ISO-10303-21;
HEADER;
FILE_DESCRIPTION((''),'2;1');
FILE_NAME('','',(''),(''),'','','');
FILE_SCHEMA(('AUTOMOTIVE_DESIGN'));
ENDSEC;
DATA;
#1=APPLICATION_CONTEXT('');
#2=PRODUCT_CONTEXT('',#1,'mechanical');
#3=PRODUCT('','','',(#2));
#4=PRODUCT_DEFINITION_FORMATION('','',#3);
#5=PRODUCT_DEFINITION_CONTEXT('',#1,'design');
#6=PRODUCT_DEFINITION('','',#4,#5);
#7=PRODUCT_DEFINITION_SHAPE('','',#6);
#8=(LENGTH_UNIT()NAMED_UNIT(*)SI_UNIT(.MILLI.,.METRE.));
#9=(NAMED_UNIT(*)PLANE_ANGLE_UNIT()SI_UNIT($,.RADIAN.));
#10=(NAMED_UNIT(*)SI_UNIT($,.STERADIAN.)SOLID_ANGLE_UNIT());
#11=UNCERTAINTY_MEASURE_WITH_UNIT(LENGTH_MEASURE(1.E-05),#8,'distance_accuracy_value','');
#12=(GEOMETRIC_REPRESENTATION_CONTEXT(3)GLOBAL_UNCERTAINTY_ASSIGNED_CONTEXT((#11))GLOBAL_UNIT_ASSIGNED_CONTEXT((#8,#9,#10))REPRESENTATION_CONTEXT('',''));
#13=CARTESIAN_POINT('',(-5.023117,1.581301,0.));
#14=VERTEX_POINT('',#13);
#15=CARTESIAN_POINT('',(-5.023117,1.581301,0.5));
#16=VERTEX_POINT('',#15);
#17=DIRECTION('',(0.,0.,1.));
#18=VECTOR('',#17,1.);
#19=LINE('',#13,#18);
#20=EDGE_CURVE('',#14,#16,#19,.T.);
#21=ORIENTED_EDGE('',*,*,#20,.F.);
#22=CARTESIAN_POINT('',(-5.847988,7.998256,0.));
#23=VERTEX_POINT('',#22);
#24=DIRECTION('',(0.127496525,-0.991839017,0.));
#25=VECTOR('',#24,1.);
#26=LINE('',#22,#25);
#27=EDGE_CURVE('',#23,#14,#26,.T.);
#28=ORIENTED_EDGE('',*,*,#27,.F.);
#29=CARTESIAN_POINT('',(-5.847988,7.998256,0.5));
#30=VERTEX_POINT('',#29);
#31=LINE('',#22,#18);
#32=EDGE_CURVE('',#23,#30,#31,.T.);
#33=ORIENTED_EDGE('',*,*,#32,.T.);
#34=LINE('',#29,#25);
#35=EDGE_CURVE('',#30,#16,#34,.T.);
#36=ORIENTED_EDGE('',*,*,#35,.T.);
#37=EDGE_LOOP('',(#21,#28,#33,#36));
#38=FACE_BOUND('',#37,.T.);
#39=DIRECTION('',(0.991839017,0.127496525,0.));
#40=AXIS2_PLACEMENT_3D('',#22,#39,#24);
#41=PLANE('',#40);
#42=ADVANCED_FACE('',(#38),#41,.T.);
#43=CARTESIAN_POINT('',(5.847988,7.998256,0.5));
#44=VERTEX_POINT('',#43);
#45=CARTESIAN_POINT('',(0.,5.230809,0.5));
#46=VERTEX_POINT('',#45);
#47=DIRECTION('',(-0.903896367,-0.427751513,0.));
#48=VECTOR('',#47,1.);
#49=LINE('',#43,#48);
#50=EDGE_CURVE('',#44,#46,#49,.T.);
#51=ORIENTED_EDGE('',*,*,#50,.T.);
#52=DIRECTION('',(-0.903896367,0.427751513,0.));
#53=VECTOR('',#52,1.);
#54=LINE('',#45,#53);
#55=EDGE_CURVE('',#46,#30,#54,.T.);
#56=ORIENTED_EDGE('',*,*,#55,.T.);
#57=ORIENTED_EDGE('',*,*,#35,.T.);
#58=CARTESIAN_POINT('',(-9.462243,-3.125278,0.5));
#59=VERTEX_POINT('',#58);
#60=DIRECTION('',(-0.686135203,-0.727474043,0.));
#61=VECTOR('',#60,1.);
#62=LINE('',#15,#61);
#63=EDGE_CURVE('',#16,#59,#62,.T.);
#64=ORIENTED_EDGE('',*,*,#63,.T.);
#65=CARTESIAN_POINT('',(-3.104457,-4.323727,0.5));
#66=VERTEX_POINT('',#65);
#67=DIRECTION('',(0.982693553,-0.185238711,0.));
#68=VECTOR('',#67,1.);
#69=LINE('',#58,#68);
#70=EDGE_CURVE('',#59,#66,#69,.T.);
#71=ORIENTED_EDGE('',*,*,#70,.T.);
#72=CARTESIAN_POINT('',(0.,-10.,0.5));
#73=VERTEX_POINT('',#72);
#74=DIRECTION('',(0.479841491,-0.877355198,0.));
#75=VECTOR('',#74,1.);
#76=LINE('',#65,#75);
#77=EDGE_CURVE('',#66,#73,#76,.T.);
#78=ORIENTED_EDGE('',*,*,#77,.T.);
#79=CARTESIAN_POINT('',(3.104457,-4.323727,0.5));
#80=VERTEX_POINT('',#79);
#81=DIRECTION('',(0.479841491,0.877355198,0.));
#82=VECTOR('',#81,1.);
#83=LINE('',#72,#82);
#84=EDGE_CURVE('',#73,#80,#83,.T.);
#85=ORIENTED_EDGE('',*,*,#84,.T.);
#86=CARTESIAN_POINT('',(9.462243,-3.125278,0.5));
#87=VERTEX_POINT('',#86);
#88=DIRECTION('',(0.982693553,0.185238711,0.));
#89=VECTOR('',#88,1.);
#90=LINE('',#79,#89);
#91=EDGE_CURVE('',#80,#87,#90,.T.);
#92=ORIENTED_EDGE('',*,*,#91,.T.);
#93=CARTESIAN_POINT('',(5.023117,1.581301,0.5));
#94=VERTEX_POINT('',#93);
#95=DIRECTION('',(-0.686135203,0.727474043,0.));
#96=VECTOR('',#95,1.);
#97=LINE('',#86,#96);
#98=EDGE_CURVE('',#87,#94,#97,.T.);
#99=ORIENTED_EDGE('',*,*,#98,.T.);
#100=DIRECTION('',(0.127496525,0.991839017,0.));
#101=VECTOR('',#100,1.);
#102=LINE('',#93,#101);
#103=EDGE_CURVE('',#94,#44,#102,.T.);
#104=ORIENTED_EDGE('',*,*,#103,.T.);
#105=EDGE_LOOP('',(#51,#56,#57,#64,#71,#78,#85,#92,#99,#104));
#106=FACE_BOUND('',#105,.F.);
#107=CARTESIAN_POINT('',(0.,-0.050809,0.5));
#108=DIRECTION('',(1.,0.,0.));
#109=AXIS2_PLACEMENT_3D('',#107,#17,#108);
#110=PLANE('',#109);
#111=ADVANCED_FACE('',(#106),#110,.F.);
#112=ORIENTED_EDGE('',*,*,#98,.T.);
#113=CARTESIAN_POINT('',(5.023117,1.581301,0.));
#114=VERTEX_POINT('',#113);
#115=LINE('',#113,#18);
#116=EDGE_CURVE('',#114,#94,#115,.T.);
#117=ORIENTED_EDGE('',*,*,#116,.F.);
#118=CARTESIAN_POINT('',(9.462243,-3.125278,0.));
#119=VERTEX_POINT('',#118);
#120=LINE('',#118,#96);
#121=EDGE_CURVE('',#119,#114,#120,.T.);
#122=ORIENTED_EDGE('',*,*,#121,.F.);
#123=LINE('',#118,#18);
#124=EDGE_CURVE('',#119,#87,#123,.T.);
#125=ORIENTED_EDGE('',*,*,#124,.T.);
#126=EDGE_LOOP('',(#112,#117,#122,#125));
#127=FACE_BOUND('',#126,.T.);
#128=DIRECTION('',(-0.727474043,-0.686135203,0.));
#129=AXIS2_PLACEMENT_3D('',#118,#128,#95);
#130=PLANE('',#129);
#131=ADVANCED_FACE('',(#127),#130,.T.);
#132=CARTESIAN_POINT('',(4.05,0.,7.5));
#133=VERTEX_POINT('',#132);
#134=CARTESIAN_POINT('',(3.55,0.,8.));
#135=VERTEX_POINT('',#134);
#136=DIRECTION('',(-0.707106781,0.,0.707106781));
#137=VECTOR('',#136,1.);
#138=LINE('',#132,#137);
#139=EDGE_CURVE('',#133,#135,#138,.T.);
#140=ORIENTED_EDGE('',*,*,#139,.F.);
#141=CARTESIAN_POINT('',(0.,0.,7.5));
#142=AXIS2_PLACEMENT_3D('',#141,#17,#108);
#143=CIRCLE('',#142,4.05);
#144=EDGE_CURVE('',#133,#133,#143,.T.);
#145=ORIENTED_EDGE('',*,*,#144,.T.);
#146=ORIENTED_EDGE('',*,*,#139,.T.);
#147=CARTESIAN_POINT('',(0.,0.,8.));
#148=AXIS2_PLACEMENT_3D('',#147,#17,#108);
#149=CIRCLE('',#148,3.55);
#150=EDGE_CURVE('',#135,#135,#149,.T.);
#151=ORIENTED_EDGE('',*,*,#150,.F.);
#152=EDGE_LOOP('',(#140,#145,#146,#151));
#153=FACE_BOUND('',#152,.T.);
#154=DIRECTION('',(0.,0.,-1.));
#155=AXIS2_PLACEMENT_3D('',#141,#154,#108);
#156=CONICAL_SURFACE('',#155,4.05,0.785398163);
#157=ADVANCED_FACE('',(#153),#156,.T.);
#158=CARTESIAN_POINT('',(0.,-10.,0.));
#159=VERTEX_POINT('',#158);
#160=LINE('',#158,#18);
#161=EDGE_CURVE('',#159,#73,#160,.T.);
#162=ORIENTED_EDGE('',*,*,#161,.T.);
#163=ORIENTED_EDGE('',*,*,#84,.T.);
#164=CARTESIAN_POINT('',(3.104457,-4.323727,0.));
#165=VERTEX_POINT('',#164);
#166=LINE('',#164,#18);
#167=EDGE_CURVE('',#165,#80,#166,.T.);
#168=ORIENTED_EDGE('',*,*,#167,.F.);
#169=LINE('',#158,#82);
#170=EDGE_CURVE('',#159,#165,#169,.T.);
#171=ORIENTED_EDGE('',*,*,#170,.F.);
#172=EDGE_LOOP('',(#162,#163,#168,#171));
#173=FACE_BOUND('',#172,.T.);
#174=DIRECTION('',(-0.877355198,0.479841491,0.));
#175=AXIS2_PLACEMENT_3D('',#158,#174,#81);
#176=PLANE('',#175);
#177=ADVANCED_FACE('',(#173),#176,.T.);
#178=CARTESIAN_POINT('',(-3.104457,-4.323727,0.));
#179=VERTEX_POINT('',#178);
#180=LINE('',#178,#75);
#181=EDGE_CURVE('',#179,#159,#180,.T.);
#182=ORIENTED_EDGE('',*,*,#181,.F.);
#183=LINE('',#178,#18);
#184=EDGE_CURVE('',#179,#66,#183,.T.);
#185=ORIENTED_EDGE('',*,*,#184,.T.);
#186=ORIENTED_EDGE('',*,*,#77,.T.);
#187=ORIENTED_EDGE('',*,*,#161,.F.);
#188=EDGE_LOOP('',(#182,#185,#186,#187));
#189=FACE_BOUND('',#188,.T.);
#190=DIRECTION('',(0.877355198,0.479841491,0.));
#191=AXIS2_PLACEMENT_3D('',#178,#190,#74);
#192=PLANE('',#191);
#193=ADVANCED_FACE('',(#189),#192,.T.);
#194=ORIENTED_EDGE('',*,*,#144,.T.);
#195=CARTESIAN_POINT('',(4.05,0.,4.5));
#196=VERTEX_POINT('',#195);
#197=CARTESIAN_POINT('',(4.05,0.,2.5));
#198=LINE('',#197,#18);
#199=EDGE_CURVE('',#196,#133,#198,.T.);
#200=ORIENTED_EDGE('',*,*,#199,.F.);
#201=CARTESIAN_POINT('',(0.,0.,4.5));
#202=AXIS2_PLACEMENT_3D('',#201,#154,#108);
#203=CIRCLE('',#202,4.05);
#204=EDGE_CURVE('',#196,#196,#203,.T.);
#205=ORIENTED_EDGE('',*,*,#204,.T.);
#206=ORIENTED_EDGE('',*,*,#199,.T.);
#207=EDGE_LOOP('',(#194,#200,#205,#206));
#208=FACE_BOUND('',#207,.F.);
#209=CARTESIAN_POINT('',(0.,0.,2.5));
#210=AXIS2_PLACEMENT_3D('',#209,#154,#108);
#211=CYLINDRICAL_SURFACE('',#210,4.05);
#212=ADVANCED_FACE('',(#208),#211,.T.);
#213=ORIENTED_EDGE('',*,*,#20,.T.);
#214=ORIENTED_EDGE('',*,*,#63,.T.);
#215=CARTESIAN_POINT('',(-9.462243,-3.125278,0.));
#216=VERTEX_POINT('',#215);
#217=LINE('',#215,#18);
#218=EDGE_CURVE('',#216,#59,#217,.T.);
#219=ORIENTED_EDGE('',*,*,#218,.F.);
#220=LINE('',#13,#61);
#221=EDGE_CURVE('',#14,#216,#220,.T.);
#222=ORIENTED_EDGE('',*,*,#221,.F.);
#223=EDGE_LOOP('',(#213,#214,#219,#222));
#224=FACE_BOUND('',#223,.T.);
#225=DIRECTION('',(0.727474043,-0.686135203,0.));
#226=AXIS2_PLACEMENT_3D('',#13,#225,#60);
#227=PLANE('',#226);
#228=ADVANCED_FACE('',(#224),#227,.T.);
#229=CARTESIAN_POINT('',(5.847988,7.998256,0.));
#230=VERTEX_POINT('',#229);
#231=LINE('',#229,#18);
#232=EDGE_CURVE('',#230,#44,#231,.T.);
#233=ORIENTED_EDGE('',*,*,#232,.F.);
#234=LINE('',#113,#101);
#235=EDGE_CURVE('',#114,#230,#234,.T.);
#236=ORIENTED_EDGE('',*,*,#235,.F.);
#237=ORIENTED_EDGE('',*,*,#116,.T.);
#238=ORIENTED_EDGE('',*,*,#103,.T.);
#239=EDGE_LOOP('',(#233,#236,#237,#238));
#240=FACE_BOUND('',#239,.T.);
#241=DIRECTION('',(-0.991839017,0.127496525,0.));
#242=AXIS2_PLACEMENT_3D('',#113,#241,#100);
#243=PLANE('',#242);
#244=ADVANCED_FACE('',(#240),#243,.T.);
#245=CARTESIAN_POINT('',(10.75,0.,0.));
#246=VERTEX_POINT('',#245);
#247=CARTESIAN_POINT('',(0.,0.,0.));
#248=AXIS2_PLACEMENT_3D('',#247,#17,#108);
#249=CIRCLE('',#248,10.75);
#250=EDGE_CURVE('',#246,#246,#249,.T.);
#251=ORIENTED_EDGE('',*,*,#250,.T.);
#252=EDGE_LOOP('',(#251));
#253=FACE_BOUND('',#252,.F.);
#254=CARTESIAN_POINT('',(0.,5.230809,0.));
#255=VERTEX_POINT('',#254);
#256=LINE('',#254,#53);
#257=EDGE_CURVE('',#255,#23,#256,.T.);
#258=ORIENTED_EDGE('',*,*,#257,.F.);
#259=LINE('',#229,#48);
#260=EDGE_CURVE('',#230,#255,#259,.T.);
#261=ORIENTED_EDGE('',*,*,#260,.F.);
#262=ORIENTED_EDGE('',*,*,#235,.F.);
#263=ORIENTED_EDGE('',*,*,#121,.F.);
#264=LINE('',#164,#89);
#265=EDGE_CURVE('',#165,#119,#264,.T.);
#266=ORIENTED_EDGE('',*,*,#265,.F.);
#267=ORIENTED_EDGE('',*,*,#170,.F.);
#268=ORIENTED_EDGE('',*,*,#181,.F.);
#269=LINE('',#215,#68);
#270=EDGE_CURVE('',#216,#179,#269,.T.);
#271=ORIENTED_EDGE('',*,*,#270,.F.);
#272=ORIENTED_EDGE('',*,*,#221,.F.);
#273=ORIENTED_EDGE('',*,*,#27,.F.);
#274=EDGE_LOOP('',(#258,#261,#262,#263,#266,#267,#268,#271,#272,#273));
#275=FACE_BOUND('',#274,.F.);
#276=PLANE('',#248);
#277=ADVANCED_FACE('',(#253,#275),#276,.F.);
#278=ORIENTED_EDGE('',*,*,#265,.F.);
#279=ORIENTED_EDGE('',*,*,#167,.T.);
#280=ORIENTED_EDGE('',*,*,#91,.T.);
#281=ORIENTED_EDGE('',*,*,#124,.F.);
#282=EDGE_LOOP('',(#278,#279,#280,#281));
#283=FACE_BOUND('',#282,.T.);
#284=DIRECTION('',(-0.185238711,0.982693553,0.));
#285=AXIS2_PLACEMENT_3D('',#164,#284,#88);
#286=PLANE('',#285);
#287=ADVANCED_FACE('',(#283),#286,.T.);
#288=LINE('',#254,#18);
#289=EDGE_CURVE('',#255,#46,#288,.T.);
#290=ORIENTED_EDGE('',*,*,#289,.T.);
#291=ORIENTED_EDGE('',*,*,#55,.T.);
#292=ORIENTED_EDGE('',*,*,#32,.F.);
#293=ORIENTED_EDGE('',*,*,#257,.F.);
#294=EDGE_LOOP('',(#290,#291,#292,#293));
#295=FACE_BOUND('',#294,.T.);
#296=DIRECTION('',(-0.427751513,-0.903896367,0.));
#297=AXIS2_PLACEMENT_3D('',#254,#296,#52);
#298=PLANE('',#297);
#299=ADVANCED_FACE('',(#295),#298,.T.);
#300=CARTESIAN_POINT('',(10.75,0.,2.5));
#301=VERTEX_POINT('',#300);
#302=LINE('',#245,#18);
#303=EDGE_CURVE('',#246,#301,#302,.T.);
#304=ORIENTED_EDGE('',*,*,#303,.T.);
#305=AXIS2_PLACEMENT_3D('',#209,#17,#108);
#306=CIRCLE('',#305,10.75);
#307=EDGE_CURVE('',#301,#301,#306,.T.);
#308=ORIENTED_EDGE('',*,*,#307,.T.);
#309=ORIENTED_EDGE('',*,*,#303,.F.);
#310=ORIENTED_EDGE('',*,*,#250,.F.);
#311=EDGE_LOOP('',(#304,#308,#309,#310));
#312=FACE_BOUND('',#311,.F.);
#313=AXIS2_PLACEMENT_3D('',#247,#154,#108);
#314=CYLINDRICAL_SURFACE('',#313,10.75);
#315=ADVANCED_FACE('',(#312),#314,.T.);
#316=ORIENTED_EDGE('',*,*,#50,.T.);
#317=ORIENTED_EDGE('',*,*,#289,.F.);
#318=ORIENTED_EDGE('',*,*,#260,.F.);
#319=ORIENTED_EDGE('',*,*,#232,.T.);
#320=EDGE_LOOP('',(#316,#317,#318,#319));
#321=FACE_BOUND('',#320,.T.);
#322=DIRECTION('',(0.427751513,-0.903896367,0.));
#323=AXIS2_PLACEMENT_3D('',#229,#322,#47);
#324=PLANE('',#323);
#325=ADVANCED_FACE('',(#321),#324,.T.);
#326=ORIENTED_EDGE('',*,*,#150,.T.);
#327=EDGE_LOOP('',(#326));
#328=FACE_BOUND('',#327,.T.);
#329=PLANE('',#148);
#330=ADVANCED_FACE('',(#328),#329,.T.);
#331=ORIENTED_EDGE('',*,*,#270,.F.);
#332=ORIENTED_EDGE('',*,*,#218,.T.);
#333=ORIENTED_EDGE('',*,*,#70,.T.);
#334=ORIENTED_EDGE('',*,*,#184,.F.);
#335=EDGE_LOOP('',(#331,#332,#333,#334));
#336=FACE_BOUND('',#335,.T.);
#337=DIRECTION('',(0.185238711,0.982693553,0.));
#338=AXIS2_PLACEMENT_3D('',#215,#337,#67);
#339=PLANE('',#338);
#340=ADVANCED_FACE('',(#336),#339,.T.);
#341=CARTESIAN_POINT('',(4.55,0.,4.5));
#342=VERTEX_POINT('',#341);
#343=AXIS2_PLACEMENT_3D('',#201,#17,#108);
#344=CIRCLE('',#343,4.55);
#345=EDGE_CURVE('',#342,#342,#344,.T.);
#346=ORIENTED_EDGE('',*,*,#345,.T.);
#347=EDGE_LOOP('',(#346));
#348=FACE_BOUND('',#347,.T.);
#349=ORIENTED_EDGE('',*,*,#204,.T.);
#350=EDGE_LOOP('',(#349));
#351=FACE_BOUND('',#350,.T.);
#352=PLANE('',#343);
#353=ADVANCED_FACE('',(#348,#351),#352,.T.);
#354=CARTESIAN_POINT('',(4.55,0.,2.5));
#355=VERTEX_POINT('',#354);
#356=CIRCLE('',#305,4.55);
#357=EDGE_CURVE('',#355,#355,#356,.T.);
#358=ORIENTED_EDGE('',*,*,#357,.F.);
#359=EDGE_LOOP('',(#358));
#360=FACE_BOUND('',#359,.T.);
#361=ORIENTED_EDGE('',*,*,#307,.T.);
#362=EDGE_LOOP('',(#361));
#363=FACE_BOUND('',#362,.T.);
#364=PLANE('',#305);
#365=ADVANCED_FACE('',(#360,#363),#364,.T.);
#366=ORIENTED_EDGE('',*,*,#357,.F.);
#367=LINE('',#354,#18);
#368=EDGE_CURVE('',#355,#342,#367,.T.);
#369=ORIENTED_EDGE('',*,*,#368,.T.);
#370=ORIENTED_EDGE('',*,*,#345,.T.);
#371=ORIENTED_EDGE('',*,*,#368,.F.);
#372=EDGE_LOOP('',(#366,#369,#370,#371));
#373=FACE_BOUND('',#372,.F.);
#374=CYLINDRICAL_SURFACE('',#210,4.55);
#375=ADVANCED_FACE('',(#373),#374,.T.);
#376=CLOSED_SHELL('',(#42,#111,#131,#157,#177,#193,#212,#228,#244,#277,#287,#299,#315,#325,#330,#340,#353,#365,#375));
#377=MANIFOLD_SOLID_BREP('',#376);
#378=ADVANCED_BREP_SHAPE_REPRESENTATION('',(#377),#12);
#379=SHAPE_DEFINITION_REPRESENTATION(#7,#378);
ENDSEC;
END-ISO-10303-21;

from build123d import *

# Parameters (mm, degrees)
F0_R     = 10.75
F1_DEPTH = 2.5
F2_R     = 4.05
F3_DEPTH = 5.5
F4_SIZE  = 0.5
F5_R     = 4.55
F6_DEPTH = 2
F7_DEPTH = 0.5


# Not quite as in the source:
# - a feature names something its author has since deleted; it is built from what else it names


with BuildPart() as f1:
    # F0 (on Top) → F1 (new body)
    with BuildSketch(Plane.XY):
        Circle(F0_R)
        with BuildLine():
            ThreePointArc((0, -10), (-7.0710678119, 7.0710678119), (10, 0))
            ThreePointArc((10, 0), (7.0710678119, -7.0710678119), (0, -10))
        make_face(mode=Mode.SUBTRACT)
        with BuildLine():
            ThreePointArc((0, -10), (7.0710678119, -7.0710678119), (10, 0))
            ThreePointArc((10, 0), (-7.0710678119, 7.0710678119), (0, -10))
        make_face()
        Polygon((3.1044567973, -4.3237269842), (0, -10), (-3.1044567973, -4.3237269842), (-9.4622431459, -3.1252779442), (-5.0231166146, 1.581300749), (-5.847987874, 7.9982560054), (0, 5.2308085927), (5.847987874, 7.9982560054), (5.0231166146, 1.581300749), (9.4622431459, -3.1252779442), align=None, mode=Mode.SUBTRACT)
        Polygon((-3.1044567973, -4.3237269842), (0, -10), (3.1044567973, -4.3237269842), (9.4622431459, -3.1252779442), (5.0231166146, 1.581300749), (5.847987874, 7.9982560054), (0, 5.2308085927), (-5.847987874, 7.9982560054), (-5.0231166146, 1.581300749), (-9.4622431459, -3.1252779442), align=None)
    extrude(amount=F1_DEPTH)

    # F2 (on face) → F3 (join)
    with BuildSketch(Plane.XY.offset(2.5)):
        Circle(F2_R)
    extrude(amount=F3_DEPTH)

    # F4
    f4_edges = [f1.edges().sort_by_distance(p)[0] for p in [
        (-4.05, 0, 8),
    ]]
    chamfer(f4_edges, length=F4_SIZE)

    # F5 (on face) → F6 (join)
    with BuildSketch(Plane.XY.offset(2.5)):
        Circle(F5_R)
    extrude(amount=F6_DEPTH)

    # F0 (on Top) → F7 (cut)
    with BuildSketch(Plane.XY):
        Polygon((-3.1044567973, -4.3237269842), (0, -10), (3.1044567973, -4.3237269842), (9.4622431459, -3.1252779442), (5.0231166146, 1.581300749), (5.847987874, 7.9982560054), (0, 5.2308085927), (-5.847987874, 7.9982560054), (-5.0231166146, 1.581300749), (-9.4622431459, -3.1252779442), align=None)
    extrude(amount=F7_DEPTH, mode=Mode.SUBTRACT)


solid = f1.part
